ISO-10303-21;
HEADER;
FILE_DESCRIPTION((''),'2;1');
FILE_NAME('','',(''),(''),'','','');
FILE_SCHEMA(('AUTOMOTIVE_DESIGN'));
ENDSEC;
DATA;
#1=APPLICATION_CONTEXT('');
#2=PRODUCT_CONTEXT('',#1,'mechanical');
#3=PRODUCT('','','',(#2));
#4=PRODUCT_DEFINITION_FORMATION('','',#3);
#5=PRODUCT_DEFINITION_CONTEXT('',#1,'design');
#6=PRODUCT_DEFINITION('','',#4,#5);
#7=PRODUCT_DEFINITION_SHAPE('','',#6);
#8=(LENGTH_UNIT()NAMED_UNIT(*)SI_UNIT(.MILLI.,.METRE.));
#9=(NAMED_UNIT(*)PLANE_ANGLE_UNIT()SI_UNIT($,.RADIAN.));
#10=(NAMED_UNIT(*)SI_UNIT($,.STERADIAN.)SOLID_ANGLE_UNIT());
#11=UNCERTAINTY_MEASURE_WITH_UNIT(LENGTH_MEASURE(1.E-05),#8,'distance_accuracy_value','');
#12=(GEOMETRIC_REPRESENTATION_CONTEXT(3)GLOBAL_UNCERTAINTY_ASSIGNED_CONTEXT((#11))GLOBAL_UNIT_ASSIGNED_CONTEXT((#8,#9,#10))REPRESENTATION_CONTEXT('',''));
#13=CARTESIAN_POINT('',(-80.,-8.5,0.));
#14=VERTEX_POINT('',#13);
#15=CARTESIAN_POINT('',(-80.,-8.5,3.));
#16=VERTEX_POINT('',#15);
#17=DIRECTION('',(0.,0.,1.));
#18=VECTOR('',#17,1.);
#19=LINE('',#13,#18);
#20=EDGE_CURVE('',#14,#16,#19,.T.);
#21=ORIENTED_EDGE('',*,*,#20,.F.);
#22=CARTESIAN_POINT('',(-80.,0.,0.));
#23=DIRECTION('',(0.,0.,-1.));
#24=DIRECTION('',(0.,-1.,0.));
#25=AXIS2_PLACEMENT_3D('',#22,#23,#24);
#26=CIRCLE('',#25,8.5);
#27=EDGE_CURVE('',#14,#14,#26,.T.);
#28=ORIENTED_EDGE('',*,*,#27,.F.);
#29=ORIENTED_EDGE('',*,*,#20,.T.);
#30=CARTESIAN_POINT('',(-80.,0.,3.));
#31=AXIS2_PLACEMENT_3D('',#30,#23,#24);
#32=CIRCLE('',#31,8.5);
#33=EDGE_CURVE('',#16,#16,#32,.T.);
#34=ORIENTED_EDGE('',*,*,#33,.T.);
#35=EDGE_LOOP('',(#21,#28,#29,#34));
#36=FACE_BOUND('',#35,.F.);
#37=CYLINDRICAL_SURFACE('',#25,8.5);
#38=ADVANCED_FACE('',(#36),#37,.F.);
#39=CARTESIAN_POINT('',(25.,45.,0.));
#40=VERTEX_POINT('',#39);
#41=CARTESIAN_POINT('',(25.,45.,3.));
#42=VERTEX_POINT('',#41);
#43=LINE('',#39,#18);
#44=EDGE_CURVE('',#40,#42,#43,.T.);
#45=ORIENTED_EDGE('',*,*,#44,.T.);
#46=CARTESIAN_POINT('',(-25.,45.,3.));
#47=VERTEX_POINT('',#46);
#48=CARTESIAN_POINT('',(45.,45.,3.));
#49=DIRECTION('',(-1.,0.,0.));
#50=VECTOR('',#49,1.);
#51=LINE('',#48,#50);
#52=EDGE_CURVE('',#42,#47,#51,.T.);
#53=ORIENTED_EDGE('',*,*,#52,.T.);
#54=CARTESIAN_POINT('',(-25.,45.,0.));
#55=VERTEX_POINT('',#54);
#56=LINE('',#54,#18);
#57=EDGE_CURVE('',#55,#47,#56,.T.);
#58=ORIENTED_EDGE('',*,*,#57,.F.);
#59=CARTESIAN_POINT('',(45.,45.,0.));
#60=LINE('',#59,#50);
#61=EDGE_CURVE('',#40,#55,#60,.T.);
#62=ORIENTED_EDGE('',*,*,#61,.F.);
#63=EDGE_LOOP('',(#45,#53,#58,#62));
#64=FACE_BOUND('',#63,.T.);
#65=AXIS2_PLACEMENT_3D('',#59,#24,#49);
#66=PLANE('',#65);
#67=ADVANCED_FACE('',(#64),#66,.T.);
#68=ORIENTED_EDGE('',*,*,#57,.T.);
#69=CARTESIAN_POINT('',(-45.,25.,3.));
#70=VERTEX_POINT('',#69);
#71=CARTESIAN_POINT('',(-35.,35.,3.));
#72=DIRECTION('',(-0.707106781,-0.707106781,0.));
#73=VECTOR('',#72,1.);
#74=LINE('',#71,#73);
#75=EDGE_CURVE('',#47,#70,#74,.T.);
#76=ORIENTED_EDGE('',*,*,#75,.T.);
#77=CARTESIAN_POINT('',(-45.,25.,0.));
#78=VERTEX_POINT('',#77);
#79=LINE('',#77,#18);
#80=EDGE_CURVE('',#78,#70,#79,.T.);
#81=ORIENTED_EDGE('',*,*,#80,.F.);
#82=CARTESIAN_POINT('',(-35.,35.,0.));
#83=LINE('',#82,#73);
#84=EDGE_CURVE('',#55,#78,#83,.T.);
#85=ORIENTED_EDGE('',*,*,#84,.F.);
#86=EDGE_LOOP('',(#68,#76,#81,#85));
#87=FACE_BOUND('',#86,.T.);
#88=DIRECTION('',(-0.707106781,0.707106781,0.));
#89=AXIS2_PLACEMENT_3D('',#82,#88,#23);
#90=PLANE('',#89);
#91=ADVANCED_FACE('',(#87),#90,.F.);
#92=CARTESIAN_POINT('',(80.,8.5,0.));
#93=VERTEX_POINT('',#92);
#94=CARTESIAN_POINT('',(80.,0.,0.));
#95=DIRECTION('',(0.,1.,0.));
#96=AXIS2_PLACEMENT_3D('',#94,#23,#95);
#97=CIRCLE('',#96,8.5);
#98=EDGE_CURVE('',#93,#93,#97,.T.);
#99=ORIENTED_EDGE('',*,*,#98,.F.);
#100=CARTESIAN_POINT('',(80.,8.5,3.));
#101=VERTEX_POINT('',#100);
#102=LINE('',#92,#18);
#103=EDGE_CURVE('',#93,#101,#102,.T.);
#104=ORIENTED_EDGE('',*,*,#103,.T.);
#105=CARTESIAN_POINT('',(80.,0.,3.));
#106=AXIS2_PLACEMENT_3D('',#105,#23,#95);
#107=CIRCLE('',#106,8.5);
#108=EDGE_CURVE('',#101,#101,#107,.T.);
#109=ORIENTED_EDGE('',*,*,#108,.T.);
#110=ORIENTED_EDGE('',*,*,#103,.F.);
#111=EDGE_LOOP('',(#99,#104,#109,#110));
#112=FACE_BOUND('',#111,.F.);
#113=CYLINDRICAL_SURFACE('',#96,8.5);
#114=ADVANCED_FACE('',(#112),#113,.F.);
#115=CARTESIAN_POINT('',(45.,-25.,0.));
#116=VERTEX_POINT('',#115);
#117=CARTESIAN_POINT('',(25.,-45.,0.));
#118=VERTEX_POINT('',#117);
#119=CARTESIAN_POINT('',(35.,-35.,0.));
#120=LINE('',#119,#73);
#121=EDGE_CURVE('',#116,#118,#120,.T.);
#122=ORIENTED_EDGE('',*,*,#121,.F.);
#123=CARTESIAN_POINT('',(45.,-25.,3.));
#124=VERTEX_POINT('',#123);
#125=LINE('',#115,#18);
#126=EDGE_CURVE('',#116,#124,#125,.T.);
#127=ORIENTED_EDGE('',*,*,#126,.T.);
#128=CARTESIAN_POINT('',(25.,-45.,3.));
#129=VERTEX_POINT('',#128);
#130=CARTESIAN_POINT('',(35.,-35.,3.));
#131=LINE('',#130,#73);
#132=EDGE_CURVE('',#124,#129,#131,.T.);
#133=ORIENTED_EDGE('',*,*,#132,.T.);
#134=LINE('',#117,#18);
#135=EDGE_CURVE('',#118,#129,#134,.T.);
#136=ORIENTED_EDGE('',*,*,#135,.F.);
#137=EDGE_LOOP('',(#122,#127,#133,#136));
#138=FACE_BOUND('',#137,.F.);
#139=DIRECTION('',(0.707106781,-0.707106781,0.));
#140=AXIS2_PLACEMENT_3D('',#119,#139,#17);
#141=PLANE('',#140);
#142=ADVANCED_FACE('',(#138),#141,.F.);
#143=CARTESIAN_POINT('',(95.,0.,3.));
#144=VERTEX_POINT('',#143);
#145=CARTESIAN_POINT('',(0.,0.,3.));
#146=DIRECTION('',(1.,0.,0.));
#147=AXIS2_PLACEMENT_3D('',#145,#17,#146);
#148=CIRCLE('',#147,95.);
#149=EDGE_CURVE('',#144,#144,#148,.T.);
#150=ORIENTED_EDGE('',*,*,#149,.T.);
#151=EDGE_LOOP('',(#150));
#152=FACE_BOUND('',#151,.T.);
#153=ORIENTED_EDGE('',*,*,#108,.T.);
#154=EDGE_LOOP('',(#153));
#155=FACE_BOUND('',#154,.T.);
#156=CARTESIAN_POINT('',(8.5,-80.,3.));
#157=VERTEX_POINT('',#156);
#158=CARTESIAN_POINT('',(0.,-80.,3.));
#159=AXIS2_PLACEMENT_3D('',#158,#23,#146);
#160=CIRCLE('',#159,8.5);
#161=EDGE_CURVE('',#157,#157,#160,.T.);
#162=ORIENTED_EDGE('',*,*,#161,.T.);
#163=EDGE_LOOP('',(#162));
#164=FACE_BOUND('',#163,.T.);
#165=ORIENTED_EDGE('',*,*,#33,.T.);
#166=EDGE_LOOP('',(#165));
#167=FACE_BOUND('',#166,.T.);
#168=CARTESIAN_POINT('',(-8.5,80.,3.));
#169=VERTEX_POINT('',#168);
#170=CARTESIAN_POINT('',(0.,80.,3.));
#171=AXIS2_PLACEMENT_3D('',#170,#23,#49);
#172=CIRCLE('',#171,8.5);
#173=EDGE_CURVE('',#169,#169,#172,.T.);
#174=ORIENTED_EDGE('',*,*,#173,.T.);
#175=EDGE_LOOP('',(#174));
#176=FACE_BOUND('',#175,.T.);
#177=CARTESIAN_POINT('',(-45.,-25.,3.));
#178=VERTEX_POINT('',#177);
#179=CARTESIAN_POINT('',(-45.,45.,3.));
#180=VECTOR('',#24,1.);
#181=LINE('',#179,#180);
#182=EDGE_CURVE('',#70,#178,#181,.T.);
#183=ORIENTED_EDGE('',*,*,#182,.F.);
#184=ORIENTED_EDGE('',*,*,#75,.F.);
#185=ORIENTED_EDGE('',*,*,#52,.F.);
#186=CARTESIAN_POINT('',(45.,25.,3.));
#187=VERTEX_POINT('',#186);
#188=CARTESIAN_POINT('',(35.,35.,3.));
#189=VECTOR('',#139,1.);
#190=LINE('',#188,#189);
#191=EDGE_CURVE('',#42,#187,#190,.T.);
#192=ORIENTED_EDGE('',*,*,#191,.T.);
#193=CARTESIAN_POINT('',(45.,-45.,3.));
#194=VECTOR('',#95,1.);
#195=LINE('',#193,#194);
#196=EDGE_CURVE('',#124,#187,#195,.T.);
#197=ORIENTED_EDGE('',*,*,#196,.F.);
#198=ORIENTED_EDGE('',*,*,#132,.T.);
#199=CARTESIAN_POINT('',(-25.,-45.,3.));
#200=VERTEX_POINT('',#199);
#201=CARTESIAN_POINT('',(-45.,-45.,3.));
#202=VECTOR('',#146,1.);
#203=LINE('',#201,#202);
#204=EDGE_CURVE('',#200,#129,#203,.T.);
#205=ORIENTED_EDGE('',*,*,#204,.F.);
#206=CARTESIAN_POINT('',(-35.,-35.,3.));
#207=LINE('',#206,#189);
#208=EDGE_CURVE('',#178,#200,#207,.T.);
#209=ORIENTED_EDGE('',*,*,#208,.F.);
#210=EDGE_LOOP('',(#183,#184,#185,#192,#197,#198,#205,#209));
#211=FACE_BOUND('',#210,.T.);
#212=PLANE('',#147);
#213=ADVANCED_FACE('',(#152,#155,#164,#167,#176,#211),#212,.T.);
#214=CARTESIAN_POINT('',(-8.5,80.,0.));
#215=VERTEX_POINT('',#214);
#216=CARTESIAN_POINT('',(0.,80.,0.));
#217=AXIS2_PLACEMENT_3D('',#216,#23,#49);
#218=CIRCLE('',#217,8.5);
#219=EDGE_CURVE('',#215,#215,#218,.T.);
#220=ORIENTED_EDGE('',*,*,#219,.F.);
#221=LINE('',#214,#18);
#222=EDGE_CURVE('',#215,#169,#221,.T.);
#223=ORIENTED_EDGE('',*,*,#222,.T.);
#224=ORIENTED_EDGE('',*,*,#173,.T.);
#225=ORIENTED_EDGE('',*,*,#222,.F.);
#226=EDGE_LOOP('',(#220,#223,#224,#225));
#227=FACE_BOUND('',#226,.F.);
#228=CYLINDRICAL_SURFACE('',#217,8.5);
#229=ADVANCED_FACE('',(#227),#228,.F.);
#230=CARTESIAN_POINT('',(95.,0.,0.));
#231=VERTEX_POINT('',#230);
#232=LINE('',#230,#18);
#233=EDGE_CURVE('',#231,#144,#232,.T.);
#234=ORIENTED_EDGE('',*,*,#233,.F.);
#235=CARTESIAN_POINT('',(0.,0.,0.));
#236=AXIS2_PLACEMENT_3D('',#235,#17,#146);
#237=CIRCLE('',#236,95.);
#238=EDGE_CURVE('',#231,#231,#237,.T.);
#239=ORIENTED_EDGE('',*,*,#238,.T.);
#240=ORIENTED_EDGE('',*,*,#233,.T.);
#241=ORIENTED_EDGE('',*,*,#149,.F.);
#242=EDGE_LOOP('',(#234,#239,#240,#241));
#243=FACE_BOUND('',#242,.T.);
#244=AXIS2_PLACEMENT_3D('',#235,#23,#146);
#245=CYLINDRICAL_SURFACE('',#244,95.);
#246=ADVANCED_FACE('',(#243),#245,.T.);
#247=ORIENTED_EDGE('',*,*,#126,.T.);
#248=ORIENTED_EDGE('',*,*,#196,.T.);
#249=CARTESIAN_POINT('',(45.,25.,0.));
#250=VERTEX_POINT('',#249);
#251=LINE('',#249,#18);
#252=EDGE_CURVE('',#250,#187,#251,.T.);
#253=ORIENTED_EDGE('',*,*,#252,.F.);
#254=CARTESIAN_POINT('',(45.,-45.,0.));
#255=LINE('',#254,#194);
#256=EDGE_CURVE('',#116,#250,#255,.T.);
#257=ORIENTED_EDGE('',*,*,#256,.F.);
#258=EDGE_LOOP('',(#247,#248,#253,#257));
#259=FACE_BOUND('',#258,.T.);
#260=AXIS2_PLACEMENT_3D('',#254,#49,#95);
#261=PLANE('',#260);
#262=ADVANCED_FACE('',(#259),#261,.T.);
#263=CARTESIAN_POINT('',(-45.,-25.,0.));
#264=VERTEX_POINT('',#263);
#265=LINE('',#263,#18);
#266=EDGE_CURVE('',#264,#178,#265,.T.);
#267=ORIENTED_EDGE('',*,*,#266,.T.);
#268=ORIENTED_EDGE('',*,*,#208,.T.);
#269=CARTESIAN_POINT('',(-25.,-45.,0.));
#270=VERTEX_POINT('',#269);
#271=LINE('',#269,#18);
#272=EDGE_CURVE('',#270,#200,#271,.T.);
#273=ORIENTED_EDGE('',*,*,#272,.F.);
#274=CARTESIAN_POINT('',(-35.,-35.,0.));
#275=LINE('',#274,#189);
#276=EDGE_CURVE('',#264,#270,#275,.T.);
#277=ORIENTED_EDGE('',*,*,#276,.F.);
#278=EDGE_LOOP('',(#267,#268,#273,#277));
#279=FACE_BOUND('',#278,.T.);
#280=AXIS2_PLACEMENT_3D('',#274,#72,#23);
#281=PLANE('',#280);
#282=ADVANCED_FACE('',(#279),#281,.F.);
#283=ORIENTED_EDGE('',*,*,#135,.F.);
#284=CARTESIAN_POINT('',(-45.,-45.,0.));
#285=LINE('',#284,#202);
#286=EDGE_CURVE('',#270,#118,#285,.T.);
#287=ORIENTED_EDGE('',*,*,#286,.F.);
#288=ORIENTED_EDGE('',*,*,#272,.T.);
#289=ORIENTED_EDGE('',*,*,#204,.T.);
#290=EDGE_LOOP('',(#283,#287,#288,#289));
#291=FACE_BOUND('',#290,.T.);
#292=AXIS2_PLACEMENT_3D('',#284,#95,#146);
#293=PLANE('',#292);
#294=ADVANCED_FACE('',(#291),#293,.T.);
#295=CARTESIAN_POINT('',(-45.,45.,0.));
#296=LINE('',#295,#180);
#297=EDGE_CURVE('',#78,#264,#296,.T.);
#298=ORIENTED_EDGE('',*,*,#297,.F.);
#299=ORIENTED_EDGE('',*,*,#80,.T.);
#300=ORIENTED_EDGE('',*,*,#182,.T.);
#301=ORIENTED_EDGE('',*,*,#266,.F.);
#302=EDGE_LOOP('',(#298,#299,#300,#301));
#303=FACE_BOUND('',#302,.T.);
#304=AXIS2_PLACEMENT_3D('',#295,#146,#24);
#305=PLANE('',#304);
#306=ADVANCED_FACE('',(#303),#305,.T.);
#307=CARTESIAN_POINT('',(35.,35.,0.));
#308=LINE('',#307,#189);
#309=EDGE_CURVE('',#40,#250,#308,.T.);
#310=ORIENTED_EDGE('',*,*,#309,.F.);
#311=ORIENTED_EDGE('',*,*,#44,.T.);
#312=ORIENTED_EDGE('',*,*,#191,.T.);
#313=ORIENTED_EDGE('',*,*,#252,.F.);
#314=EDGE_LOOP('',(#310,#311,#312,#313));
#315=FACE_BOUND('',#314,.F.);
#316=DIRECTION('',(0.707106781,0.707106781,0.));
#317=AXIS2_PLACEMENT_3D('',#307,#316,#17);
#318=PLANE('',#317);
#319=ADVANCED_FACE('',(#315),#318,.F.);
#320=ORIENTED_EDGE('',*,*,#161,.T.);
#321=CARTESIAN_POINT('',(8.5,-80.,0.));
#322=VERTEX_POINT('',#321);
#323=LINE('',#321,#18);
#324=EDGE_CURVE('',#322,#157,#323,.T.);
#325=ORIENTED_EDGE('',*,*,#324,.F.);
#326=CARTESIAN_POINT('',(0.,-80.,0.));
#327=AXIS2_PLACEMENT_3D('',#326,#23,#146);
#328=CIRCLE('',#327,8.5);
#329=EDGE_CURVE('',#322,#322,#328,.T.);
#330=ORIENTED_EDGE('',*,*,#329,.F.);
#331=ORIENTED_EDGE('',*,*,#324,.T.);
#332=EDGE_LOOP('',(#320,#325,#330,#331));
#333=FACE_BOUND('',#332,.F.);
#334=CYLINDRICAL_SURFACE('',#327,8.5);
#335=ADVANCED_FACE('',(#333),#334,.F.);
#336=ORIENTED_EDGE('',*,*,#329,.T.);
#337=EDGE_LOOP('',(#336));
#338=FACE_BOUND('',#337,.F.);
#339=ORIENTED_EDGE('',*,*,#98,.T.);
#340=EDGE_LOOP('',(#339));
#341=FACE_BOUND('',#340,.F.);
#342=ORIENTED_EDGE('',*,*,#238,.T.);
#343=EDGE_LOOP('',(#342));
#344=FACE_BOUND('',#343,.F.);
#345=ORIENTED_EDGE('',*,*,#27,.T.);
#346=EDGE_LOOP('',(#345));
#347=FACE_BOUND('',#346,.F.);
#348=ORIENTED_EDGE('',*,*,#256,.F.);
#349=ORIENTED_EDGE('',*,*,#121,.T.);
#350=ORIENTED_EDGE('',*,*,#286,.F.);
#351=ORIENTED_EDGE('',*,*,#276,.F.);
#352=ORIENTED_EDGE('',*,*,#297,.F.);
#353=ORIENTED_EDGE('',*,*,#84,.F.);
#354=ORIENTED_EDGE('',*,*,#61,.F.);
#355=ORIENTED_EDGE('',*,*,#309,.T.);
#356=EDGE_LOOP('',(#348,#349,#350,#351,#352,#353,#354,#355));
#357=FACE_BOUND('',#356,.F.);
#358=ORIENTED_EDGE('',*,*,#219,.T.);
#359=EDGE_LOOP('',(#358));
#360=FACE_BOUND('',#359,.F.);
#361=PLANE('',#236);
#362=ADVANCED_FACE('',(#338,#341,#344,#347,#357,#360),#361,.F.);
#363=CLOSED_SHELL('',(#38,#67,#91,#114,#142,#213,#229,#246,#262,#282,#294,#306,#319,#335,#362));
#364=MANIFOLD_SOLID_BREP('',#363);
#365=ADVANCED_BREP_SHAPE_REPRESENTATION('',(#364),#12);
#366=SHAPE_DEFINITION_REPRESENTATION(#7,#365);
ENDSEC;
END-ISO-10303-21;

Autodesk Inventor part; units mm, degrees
ref_plane "YZ Plane" through (0, 0, 0) normal (1, 0, 0) x (0, 1, 0)
ref_plane "XZ Plane" through (0, 0, 0) normal (0, 1, 0) x (-1, 0, 0)
ref_plane "XY Plane" through (0, 0, 0) normal (0, 0, 1) x (1, 0, 0)
sketch "Sketch1" plane through (0, 0, 0) normal (0, 0, 1) x (1, 0, 0)
  circle A0 centre (0, 0) radius 95
  line L0 (45, 45) -> (-45, 45)
  line L1 (-45, 45) -> (-45, -45)
  line L2 (-45, -45) -> (45, -45)
  line L3 (45, -45) -> (45, 45)
  line L4 (45, 45) -> (-45, -45) construction
  line L5 (-45, 45) -> (45, -45) construction
  dimension "d157" = 190
  dimension "d158" = 90
  dimension "d159" = 90
extrude "Plate5" add sketch "Sketch1" along normal blind 3
sketch "Sketch7" plane through (0, 0, 0) normal (0, 0, -1) x (-1, 0, 0)
  circle A0 centre (0, 80) radius 8.5
  point P0 (0, 0)
  dimension "d160" = 17
  dimension "d161" = 80
extrude "Cut1" cut sketch "Sketch7" against normal blind 3
pattern_circular "Circular Pattern1" count 4 over 360 about axis through (0, 0, -10) along (0, 0, 1) of "Cut1"
chamfer "Corner Chamfer2" distance 20 angle 45 4 edges at (-45, -45, 1.5) (45, -45, 1.5) (-45, 45, 1.5) (45, 45, 1.5)
properties part number "TZS 754 FDS 940 FLANGE" material "Stainless Steel"
